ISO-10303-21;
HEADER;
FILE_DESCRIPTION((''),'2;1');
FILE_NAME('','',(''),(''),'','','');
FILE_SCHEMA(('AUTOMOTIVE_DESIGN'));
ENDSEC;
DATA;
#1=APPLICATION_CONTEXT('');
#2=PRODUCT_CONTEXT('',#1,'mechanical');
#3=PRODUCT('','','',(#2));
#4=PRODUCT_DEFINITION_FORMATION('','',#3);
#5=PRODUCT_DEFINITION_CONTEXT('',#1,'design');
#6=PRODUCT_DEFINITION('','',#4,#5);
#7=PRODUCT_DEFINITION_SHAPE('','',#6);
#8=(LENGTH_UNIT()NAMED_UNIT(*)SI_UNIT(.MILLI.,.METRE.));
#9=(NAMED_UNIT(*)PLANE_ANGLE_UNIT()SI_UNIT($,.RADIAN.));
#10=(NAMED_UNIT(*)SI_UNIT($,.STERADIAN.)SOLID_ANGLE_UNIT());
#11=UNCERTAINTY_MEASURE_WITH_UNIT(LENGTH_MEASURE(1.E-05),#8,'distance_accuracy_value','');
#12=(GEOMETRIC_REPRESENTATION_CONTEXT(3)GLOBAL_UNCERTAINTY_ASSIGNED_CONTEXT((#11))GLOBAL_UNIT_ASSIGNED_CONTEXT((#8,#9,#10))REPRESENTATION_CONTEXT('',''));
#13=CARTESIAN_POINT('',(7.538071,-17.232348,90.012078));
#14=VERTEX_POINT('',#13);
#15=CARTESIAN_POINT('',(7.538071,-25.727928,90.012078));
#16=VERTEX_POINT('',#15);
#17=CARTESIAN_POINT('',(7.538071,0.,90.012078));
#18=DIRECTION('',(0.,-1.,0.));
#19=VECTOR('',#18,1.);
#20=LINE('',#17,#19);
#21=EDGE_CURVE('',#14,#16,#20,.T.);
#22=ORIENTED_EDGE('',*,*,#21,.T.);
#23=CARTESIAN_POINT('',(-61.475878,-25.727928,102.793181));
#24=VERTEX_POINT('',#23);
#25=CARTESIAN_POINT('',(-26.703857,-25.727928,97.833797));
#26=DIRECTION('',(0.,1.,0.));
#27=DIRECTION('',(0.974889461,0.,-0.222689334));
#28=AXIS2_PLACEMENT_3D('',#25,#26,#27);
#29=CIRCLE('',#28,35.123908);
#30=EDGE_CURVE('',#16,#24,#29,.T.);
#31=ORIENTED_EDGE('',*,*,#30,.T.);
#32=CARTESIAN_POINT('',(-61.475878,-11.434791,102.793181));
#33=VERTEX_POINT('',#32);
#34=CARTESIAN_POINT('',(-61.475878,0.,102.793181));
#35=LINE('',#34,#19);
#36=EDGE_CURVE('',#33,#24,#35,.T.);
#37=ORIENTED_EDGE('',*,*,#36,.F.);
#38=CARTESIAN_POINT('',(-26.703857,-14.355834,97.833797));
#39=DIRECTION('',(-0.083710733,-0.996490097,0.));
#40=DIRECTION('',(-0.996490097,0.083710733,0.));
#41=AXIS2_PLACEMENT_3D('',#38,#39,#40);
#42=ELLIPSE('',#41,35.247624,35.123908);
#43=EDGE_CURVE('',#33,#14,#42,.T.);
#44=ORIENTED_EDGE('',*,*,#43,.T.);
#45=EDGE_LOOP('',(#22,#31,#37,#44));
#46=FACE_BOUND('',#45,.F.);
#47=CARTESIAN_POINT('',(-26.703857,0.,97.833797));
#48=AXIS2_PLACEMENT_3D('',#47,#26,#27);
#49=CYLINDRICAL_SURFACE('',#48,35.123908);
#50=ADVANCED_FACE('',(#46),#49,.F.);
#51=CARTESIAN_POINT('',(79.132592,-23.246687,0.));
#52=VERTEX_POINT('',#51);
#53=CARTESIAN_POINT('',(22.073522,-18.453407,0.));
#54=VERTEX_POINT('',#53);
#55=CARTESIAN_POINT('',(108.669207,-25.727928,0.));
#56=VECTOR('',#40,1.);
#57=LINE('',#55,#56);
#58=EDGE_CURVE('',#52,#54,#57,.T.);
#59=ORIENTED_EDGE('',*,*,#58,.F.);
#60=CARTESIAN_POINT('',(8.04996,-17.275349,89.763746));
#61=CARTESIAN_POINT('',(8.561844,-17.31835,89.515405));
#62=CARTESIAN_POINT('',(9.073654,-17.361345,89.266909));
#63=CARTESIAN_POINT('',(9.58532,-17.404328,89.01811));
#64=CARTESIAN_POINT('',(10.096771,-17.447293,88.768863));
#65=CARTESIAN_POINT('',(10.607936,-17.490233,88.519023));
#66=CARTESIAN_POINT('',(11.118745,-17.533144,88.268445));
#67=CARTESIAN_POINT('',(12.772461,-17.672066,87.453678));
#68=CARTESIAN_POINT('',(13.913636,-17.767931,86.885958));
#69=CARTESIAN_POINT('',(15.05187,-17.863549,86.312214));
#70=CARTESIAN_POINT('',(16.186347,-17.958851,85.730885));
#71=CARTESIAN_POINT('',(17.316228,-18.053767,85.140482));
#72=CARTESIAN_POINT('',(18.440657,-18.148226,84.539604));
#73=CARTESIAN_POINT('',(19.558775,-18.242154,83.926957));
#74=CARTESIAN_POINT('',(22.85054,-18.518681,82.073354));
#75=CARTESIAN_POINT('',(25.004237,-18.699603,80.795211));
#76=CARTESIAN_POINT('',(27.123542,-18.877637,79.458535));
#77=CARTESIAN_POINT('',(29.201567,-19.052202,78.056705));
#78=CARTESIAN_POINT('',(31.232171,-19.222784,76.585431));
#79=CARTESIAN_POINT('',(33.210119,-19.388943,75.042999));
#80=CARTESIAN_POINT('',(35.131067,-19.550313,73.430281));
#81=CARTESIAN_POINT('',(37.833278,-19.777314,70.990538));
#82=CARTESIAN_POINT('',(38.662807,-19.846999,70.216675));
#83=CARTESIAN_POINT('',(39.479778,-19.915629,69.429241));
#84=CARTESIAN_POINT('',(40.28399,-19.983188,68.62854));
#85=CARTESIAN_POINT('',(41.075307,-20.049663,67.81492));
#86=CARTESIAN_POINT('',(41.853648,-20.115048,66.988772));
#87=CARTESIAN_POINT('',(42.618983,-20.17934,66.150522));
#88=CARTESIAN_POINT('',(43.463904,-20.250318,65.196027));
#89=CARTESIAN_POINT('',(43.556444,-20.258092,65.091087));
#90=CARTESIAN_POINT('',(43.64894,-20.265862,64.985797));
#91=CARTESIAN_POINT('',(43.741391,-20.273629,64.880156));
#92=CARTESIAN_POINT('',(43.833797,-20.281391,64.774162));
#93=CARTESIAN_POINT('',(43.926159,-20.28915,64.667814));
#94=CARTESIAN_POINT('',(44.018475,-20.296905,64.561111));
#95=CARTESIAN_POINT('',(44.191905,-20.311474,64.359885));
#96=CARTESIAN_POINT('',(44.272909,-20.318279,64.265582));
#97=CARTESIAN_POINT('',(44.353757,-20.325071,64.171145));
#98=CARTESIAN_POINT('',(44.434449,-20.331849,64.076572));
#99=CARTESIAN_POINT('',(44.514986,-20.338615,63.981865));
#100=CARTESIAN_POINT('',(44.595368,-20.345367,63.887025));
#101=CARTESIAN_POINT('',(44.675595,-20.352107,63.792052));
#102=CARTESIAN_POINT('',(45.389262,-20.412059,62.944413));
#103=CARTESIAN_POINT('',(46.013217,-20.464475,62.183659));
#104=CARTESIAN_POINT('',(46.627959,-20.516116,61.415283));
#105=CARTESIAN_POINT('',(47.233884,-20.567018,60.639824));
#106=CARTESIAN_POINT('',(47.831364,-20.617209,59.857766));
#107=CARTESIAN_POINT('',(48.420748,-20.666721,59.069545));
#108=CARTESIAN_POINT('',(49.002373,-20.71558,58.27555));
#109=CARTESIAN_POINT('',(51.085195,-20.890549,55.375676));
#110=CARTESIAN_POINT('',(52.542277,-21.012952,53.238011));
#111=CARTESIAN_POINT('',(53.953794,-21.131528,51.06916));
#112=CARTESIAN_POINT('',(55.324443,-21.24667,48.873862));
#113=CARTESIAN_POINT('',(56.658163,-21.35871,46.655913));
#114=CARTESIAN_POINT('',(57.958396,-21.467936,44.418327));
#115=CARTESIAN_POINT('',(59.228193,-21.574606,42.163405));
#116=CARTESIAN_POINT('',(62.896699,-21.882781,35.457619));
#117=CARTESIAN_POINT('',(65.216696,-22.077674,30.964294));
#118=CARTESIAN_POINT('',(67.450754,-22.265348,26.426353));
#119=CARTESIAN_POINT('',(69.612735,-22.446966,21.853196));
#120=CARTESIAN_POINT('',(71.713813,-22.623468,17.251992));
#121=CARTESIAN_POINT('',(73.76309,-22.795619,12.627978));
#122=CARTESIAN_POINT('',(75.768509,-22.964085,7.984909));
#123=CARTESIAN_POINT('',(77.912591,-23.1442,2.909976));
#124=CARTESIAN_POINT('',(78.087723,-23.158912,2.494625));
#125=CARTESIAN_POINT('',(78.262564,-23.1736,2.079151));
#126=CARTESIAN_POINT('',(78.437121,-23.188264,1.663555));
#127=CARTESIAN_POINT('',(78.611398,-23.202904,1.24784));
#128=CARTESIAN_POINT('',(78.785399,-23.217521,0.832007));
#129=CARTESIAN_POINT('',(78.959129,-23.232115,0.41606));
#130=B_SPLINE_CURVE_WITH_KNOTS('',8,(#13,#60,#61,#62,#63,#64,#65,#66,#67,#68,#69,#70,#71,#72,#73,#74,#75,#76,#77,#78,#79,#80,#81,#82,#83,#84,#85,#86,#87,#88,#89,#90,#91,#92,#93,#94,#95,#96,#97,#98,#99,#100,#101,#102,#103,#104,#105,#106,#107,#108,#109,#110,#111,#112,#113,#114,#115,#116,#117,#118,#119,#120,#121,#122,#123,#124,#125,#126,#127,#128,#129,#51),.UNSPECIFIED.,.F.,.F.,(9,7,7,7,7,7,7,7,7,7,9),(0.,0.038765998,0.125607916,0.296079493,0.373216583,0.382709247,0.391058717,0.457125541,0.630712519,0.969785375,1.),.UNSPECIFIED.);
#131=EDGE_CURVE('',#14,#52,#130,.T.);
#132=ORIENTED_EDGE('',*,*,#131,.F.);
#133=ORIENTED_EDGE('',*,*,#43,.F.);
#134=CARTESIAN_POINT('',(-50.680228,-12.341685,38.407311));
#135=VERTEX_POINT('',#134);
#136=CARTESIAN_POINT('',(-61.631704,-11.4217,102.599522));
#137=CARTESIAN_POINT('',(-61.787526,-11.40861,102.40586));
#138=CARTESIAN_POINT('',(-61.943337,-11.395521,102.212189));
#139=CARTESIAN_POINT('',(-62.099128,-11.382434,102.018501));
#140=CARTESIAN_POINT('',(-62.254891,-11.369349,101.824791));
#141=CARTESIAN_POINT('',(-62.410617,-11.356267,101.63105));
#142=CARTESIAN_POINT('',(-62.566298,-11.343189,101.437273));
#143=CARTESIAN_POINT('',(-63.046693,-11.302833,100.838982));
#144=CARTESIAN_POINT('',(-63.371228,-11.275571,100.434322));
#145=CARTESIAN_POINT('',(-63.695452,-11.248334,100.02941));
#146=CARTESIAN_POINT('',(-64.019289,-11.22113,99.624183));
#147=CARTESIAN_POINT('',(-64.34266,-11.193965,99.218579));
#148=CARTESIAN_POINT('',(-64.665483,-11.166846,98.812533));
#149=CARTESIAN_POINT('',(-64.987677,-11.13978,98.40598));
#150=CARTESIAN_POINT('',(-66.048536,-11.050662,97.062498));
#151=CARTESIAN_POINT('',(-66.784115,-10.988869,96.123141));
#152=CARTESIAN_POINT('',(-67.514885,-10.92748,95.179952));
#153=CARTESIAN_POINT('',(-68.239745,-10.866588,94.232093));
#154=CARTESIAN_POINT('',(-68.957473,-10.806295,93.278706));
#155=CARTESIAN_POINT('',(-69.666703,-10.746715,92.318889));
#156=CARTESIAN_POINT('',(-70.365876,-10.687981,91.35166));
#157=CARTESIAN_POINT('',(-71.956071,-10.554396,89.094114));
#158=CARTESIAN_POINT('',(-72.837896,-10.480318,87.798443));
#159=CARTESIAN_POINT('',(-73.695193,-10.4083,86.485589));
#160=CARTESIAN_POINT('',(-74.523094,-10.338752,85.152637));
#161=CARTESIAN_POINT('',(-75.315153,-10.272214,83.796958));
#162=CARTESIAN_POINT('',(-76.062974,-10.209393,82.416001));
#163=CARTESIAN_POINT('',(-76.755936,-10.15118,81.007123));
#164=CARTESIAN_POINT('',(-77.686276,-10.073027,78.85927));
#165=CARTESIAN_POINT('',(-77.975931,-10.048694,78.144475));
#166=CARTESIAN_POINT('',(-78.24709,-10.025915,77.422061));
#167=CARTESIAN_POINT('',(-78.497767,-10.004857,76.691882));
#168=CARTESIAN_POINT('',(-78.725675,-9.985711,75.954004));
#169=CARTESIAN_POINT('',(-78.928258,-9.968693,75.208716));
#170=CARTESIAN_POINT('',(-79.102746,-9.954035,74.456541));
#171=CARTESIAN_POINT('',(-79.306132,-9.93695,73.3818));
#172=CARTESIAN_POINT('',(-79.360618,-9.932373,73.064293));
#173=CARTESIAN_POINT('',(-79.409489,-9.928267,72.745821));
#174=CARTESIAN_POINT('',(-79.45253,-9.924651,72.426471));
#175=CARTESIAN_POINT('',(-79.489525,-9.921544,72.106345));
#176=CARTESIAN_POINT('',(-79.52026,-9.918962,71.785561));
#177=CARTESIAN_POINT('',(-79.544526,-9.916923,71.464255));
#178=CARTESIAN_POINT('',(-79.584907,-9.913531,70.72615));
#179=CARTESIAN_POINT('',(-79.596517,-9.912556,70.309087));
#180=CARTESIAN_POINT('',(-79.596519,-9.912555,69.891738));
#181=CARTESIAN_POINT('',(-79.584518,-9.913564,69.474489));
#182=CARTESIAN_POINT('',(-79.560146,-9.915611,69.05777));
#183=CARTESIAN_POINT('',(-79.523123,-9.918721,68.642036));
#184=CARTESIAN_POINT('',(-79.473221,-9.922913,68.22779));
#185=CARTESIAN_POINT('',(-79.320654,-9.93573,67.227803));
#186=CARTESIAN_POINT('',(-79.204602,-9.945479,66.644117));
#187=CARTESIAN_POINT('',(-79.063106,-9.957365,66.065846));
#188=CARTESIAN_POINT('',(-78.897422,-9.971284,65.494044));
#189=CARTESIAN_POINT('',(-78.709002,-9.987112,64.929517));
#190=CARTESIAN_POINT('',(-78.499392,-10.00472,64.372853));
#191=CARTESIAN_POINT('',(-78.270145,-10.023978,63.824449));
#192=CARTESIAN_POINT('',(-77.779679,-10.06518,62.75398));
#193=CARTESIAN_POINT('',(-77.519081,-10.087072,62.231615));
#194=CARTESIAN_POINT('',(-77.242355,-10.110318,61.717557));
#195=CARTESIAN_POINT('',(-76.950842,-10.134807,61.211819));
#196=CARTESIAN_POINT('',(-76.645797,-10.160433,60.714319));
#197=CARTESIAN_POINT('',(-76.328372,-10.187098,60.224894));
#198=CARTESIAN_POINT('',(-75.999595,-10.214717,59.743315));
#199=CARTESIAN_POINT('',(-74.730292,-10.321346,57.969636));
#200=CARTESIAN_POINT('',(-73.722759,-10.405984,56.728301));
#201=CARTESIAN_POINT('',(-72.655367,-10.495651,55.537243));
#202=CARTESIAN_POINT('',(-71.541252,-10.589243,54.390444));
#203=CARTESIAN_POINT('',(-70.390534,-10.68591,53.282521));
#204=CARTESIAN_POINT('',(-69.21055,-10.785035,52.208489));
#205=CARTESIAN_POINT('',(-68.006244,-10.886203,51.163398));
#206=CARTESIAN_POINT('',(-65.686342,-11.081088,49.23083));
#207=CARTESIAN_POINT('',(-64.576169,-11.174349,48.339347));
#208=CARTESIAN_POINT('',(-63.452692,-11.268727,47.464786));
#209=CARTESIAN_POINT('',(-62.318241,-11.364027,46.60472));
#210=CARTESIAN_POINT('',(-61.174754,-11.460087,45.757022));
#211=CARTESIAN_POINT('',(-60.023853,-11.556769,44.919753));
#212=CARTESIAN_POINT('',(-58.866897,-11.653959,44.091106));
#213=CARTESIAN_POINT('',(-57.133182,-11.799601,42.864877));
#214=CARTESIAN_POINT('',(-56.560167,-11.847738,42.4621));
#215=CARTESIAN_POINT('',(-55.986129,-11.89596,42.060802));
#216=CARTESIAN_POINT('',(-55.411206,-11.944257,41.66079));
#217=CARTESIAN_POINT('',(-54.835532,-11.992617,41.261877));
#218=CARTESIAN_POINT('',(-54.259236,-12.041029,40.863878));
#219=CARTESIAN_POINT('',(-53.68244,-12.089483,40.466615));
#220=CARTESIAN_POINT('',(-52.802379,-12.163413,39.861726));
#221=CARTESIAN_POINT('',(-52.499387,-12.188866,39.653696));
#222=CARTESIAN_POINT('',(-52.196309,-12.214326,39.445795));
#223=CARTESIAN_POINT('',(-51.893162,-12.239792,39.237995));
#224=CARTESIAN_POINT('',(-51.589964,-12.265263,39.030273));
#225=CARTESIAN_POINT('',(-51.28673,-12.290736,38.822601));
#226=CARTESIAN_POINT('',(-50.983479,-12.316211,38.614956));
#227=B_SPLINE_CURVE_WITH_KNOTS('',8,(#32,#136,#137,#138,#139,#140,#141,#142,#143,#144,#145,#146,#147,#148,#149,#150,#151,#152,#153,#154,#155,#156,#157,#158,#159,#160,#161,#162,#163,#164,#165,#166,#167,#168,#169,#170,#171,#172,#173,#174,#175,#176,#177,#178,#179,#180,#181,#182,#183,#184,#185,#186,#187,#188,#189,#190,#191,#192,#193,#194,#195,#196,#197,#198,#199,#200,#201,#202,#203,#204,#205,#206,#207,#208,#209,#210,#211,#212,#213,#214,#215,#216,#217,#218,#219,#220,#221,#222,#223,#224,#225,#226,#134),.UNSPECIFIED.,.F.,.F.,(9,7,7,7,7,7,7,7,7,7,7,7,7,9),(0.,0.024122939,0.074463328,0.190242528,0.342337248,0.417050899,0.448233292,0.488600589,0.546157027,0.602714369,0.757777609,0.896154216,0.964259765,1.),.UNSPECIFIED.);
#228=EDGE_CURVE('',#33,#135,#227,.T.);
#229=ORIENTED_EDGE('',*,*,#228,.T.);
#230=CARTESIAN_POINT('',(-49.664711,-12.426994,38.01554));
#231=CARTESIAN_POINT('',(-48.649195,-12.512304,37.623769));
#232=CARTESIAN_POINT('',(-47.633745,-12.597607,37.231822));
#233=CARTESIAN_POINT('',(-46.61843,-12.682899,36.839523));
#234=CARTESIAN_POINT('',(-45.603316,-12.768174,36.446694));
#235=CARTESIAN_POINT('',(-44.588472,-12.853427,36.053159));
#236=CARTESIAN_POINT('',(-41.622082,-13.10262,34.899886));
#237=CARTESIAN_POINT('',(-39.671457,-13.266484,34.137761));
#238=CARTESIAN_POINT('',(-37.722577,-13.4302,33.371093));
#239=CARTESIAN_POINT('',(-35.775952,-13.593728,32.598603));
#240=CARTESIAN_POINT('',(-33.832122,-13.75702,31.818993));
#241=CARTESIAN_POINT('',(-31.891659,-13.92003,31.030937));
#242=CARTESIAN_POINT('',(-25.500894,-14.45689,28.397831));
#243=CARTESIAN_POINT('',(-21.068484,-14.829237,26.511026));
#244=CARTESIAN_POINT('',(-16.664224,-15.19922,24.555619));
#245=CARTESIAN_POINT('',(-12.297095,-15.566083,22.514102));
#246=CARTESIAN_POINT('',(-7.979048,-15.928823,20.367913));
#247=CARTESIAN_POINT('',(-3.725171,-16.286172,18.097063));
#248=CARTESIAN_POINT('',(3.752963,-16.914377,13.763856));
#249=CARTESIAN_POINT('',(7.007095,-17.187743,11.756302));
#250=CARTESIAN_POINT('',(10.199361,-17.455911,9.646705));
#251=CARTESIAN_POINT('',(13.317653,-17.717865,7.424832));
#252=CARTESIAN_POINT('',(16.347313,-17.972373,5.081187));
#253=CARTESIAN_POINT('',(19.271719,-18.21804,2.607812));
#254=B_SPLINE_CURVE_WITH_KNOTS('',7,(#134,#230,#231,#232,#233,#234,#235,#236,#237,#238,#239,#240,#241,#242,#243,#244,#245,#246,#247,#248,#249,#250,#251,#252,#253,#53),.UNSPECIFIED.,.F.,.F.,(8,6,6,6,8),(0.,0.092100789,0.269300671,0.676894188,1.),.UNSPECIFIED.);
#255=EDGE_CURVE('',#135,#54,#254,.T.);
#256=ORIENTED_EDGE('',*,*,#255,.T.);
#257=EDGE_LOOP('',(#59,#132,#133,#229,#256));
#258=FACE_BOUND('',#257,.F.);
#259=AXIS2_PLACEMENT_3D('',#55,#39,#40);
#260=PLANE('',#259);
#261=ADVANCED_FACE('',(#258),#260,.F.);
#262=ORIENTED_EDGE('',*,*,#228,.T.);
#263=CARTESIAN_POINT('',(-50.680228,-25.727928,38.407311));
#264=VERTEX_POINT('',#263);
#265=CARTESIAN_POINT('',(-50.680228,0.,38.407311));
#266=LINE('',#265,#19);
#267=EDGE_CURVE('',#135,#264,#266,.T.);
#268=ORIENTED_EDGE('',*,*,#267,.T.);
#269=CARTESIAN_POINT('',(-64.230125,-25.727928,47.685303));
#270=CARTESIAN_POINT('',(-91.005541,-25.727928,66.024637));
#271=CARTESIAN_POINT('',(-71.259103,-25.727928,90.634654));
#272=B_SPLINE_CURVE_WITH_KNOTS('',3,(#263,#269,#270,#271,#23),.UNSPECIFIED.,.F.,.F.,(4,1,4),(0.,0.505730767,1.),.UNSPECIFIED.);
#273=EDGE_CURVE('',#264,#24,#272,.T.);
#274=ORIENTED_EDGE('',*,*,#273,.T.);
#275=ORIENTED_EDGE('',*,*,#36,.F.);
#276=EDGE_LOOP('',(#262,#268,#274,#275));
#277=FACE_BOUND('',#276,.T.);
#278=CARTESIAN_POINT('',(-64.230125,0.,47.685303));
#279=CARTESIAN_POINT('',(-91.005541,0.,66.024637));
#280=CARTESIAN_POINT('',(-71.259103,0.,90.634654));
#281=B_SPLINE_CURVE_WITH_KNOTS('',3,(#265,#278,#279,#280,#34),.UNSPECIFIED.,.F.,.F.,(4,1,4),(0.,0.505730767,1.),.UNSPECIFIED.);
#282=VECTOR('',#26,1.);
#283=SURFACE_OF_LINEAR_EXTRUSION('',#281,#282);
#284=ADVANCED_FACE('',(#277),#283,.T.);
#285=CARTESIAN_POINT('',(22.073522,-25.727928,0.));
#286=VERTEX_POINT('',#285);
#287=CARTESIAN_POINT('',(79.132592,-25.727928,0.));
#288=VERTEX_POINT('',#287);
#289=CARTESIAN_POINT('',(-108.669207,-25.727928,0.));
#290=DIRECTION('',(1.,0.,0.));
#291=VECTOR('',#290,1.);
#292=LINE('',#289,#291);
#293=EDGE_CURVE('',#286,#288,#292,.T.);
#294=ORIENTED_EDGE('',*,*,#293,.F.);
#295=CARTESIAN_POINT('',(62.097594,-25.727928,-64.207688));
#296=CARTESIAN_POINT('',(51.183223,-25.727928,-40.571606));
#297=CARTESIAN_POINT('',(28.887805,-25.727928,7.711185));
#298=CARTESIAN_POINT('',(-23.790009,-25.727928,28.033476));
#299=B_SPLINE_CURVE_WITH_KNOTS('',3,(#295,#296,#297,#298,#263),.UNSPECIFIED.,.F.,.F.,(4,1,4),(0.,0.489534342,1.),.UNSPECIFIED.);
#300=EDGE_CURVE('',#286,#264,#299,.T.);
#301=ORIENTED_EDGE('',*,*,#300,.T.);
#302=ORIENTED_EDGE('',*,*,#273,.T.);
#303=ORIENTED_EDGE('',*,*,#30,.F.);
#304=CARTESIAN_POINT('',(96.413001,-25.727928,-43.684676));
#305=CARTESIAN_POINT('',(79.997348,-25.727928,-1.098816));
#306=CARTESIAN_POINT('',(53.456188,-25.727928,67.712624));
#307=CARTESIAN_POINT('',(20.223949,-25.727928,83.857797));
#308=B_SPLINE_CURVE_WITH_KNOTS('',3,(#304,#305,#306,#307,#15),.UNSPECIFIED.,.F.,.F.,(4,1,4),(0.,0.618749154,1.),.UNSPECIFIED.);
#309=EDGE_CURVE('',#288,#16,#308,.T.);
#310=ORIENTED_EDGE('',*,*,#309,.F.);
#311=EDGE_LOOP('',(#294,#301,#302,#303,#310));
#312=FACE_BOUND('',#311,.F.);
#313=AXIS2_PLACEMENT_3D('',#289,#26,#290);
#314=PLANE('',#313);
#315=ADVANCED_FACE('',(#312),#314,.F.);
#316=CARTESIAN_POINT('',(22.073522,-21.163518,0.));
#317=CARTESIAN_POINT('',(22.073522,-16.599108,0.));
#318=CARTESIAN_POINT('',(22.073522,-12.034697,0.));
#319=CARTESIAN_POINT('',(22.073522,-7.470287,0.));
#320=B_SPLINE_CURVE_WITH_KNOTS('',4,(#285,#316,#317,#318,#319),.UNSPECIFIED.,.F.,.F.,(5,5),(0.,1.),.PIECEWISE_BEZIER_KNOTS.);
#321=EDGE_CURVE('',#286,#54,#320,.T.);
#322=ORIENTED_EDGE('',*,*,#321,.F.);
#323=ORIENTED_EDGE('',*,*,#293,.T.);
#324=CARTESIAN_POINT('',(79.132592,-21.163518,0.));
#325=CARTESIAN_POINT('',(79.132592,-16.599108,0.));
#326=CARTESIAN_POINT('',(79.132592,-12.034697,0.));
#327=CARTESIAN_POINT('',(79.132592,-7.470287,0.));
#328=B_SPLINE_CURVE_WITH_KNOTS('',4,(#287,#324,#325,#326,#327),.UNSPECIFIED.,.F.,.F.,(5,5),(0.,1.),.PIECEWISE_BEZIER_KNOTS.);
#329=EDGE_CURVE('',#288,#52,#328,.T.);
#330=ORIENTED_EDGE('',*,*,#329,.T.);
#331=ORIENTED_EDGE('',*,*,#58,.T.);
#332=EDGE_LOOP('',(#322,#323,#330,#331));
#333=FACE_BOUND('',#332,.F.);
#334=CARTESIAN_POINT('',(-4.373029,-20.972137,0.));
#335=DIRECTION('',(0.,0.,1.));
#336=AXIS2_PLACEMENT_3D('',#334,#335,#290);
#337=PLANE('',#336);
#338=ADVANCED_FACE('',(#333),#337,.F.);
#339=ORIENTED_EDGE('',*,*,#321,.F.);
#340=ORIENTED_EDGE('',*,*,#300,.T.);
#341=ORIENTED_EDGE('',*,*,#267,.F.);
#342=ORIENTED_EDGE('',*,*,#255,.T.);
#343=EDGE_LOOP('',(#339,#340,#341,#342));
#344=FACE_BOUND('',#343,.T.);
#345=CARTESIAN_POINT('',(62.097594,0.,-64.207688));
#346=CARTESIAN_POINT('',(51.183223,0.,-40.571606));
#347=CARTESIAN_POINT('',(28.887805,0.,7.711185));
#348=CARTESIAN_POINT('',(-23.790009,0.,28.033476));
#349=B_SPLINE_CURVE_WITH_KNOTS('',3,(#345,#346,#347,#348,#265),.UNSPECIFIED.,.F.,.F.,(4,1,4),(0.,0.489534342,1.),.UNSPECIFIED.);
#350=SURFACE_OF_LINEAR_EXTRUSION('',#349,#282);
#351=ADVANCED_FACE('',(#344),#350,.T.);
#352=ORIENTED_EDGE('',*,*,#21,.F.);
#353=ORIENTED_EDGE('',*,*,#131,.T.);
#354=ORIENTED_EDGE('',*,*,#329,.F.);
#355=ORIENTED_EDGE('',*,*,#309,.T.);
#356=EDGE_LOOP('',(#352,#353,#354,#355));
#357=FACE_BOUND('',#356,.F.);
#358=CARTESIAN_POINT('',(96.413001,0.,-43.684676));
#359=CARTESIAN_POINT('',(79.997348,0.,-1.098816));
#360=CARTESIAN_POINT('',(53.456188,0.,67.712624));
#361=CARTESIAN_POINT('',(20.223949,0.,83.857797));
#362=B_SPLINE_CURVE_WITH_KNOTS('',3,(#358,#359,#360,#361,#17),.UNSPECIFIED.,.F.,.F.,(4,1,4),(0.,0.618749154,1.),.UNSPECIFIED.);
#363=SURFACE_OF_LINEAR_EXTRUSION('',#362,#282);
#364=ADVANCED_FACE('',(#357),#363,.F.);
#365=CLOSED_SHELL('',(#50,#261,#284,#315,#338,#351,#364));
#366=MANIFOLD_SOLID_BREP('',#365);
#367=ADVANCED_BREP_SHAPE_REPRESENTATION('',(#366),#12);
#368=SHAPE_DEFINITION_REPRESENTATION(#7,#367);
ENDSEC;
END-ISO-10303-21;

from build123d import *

# Parameters (mm, degrees)
F2_DEPTH = 25.7279276848
F3_DEPTH = 102.7941810931


# Not quite as in the source:
# - a feature names something its author has since deleted; it is built from what else it names


with BuildPart() as f2:
    # F0 (on Front) → F2 (new body, through all)
    with BuildSketch(Plane.XZ):
        with BuildLine():
            ThreePointArc((7.538071066, 90.012077608), (-33.0999025849, 63.2971569556), (-61.4758778659, 102.7931809931))
            add(Edge.make_bspline(
                [(-50.6802275777, 38.4073108435), (-64.2301253741, 47.6853026647), (-91.0055411856, 66.0246371681), (-71.2591028819, 90.6346541889), (-61.4758778659, 102.7931809931)],
                knots=[0, 0, 0, 0, 0.5057307672, 1, 1, 1, 1], degree=3))
            add(Edge.make_bspline(
                [(62.097594142, -64.207687974), (51.1832226367, -40.5716055165), (28.887804967, 7.7111846278), (-23.7900094582, 28.033475615), (-50.6802275777, 38.4073108435)],
                knots=[0, 0, 0, 0, 0.4895343419, 1, 1, 1, 1], degree=3))
            Line((62.097594142, -64.207687974), (96.4130014181, -43.6846762896))
            add(Edge.make_bspline(
                [(96.4130014181, -43.6846762896), (79.9973481318, -1.0988161117), (53.4561883249, 67.712624491), (20.2239489646, 83.857797394), (7.538071066, 90.012077608)],
                knots=[0, 0, 0, 0, 0.6187491541, 1, 1, 1, 1], degree=3))
        make_face()
    extrude(amount=F2_DEPTH)


with BuildPart() as f3:
    # F1 (on Top) → F3 (new body, through all)
    with BuildSketch(Plane.XY):
        Polygon((108.6692065001, -25.7279276848), (-108.6692065001, -7.4702873826), (-108.6692065001, -25.7279276848), align=None)
    extrude(amount=F3_DEPTH)

    # F4: intersect F2
    add(f2.part, mode=Mode.INTERSECT)


solid = f3.part
